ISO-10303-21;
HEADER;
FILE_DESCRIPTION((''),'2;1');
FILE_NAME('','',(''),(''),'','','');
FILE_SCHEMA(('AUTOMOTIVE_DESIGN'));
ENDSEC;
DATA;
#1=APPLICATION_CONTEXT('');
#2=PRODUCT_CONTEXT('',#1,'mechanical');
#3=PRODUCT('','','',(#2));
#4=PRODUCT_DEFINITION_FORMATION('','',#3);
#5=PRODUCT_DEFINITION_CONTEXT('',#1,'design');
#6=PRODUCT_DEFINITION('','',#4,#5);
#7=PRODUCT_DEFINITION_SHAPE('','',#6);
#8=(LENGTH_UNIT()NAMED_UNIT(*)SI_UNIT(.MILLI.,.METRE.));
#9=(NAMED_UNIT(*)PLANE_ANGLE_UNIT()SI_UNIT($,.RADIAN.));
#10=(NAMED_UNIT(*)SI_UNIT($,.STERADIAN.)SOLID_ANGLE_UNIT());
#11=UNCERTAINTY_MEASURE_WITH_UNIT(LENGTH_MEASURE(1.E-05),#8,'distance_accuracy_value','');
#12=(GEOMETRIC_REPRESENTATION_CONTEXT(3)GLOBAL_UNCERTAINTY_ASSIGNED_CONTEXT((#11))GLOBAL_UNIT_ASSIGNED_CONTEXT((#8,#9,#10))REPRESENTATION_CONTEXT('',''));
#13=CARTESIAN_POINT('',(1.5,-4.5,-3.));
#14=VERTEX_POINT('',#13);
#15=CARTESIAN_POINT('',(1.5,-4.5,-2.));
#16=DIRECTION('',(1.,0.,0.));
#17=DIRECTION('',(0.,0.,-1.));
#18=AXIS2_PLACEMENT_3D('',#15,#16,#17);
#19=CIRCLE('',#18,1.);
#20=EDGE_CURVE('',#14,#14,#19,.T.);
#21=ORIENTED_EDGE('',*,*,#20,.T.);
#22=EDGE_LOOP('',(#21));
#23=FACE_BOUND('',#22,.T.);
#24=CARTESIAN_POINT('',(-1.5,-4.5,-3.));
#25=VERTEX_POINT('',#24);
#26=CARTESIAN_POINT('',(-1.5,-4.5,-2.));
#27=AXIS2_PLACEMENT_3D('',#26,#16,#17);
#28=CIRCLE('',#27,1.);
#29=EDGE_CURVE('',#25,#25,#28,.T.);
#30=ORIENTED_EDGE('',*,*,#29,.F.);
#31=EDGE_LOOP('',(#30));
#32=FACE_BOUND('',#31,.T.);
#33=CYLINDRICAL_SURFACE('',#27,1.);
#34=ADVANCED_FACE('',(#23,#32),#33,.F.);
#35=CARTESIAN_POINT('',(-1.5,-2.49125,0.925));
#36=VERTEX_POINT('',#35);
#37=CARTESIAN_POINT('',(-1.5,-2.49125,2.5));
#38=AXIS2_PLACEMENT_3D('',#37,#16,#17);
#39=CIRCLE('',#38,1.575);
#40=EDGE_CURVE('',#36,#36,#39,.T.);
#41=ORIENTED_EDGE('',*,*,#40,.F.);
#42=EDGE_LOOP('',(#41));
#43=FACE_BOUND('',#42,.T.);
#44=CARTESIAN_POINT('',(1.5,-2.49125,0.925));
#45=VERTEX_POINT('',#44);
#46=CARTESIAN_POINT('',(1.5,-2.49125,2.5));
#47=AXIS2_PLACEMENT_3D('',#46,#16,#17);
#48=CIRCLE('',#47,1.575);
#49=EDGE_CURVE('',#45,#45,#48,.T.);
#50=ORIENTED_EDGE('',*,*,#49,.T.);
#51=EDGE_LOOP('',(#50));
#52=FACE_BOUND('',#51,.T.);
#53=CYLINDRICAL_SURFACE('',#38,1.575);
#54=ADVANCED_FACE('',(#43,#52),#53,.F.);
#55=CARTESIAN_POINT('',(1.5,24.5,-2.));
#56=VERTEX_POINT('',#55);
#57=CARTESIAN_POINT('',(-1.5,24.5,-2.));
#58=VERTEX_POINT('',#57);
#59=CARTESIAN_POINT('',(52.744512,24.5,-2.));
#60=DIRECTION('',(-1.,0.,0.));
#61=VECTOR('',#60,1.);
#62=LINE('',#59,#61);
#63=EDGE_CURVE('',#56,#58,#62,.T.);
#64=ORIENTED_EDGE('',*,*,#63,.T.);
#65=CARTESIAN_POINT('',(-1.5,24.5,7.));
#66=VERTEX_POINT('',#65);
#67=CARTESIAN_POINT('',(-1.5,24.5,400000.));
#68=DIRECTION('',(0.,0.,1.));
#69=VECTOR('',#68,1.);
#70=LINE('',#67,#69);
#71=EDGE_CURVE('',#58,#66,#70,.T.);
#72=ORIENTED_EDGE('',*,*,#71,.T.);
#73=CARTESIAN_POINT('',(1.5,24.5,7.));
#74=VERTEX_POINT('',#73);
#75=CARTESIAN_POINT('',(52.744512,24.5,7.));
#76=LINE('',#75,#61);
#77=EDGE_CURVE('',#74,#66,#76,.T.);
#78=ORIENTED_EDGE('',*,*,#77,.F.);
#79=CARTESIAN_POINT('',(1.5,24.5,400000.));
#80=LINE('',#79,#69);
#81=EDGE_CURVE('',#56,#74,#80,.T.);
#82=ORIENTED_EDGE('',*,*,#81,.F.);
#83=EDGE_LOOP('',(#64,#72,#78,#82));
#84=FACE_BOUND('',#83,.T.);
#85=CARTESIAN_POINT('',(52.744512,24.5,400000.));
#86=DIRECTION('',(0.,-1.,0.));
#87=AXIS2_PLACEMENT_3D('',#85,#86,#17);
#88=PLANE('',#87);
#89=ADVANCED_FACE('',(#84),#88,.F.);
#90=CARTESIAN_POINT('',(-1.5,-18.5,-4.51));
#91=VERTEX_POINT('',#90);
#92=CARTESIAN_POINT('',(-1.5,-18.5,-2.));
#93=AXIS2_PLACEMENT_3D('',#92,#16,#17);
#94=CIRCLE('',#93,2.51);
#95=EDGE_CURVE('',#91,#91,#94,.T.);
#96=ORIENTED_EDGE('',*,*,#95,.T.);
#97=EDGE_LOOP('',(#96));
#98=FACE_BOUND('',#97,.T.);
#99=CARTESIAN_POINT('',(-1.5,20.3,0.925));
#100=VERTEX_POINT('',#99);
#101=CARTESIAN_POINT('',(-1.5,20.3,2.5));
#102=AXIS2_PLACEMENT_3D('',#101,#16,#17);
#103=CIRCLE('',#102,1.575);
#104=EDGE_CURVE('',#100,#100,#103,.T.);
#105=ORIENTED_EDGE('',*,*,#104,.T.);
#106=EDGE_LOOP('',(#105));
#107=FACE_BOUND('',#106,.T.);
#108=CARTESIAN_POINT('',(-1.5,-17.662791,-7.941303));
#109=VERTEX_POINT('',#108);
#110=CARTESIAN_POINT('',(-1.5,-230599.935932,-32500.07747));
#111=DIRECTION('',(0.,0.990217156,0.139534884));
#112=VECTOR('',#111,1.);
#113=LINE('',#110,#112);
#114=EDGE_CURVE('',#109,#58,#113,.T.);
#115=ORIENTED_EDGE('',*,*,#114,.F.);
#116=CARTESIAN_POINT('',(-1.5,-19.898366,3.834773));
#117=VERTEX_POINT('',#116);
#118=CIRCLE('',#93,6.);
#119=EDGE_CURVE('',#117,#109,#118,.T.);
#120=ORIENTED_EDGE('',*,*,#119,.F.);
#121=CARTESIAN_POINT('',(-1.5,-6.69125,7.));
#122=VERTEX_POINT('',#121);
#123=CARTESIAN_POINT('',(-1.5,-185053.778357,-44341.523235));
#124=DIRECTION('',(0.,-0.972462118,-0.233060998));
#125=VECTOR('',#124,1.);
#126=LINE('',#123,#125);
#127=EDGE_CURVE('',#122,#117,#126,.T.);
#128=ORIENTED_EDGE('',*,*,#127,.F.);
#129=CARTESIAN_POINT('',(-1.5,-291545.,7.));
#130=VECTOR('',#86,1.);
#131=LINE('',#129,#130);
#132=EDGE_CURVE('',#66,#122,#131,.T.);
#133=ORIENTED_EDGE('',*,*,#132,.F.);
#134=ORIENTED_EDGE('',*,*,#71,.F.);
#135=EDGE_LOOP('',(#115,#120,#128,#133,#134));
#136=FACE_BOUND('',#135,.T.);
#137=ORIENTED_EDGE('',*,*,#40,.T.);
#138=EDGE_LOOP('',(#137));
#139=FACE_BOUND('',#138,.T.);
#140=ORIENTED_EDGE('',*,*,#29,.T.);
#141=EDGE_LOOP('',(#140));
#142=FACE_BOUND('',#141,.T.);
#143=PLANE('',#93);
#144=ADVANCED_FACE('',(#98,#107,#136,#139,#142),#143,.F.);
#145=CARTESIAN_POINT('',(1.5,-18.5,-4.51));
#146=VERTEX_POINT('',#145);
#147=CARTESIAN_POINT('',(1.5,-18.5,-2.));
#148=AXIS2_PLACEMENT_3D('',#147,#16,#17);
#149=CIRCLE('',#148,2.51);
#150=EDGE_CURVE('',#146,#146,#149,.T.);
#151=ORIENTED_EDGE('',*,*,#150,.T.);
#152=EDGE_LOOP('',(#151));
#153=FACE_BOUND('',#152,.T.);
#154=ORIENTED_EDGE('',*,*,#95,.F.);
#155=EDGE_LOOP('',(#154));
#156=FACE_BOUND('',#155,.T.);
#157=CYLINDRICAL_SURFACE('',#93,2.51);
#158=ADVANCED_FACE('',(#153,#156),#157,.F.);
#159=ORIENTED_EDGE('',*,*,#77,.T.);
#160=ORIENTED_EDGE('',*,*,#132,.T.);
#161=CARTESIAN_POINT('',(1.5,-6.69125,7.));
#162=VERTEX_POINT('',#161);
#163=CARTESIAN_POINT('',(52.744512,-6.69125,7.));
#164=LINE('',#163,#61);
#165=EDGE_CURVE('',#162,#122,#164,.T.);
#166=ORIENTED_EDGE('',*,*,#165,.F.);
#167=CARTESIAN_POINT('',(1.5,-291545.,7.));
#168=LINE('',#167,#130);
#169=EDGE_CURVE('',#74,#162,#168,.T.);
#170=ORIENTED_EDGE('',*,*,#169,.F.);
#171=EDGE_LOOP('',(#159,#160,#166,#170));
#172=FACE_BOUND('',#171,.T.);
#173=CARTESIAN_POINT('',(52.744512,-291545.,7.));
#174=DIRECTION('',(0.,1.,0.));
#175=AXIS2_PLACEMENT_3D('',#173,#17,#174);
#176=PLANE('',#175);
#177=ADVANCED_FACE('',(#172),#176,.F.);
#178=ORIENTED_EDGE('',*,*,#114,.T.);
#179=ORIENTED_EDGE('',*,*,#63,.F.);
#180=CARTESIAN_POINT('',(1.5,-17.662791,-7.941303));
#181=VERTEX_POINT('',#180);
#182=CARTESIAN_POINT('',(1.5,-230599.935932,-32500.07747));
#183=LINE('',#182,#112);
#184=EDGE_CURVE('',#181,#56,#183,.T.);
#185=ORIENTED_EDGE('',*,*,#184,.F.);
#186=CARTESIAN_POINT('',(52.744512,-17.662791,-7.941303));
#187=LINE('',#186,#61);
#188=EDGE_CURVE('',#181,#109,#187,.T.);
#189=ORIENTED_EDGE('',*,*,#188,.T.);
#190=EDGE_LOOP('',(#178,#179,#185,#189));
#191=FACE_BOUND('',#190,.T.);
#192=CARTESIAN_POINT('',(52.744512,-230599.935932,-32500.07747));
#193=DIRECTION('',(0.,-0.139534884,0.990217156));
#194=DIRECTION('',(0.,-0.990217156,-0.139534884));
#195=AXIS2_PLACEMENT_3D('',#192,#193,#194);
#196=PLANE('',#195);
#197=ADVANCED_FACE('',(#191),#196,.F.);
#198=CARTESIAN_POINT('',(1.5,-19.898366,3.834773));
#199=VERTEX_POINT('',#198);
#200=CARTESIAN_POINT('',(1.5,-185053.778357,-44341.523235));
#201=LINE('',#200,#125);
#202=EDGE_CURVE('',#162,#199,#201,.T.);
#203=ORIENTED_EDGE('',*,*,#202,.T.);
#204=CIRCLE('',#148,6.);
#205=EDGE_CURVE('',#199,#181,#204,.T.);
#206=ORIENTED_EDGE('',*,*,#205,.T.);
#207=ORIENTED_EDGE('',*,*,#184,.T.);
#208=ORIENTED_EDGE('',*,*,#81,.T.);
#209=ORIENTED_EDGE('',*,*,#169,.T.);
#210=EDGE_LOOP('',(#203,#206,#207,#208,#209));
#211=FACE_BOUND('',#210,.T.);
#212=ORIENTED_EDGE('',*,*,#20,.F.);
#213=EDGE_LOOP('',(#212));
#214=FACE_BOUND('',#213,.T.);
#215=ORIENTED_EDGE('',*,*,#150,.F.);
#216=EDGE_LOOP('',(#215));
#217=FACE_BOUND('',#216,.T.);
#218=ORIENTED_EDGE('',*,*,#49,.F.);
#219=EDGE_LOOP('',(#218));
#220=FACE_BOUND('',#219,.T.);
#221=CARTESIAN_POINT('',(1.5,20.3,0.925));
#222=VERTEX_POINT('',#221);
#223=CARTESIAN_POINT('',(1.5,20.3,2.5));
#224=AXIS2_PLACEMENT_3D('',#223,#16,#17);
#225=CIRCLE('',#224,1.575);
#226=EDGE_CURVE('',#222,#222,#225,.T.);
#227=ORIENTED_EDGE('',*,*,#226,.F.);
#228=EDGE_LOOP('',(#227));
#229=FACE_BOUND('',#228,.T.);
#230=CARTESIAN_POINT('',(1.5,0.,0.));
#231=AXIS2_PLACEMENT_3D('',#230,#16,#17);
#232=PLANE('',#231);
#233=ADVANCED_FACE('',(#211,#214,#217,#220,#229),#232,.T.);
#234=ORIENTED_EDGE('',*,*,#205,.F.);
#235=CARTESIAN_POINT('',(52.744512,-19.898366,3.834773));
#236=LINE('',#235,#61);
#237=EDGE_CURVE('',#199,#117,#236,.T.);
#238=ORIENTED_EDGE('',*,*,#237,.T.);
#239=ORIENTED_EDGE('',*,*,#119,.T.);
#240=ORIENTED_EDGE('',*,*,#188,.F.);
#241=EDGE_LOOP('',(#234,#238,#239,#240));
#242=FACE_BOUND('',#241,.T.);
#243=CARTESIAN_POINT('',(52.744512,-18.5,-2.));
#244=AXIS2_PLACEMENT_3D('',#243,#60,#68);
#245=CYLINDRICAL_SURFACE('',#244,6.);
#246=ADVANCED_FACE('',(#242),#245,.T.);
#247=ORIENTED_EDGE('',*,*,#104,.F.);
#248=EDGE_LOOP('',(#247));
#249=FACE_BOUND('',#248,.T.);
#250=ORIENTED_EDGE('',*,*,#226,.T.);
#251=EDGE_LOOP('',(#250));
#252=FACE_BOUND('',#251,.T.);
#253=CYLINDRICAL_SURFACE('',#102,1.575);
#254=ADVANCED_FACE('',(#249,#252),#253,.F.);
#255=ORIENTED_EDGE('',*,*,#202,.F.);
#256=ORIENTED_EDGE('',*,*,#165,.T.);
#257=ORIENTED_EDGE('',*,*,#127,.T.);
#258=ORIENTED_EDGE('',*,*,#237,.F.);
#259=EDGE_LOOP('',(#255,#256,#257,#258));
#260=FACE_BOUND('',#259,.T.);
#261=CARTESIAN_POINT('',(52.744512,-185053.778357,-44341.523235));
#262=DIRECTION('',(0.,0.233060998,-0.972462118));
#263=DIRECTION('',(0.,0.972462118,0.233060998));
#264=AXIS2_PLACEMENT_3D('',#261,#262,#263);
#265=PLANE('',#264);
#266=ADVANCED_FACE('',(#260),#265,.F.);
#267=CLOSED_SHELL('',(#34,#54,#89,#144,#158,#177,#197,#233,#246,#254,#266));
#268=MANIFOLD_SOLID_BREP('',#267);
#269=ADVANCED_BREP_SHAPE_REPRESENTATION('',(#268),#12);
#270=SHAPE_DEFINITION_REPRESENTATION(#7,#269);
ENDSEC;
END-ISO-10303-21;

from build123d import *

# Parameters (mm, degrees)
BOSS_EXTRUDE1_START                        = -1.5
BOSS_EXTRUDE1_DEPTH                        = 3
PIVOTSHAFTHOLE_CUT_DEPTH                   = 26.816661287
PIVOTSHAFTHOLE_CUT_DEPTH_BACK              = 26.816661287
PIVOTSHAFTHOLE_SKETCH_R                    = 2.51
MOUNTHOLESTOENDBLOCKSEEDFODDER_START       = -1.5
MOUNTHOLESTOENDBLOCKSEEDFODDER_OUTLINE_R   = 2.51
MOUNTHOLESTOENDBLOCKSEEDFODDER_DEPTH       = 3
MOUNTHOLESTOENDBLOCKSEED_SKETCH_R          = 1.575
MOUNTHOLESTOENDBLOCKSEED_CUT_DEPTH         = 26.816661287
MOUNTHOLESTOENDBLOCKSEED_PATTERN_START     = -1.5
MOUNTHOLESTOENDBLOCKSEED_PATTERN_OUTLINE_R = 1.575
MOUNTHOLESTOENDBLOCKSEED_PATTERN_DEPTH     = 3
SPRINGANCHORHOLE_CUT_DEPTH                 = 26.816661287
SPRINGANCHORHOLE_CUT_DEPTH_BACK            = 26.816661287
SPRINGANCHORHOLE_SKETCH_R                  = 1


# Read off the part's stored shape, not the designer's step: mountHolesToEndBlockSeedFodder, mountHolesToEndBlockSeed_pattern
with BuildPart() as part:
    # Sketch1 → Boss-Extrude1 (new body)
    with BuildSketch(Plane(origin=(0, 0, 0), x_dir=(0, 0, -1), z_dir=(1, 0, 0)).offset(BOSS_EXTRUDE1_START)):
        with BuildLine():
            Line((2, 24.5), (7.941302937, -17.662790698))
            ThreePointArc((7.941302937, -17.662790698), (3.119056028, -24.394719129), (-3.834772709, -19.898365989))
            Line((-3.834772709, -19.898365989), (-7, -6.69125))
            Line((-7, -6.69125), (-7, 24.5))
            Line((-7, 24.5), (2, 24.5))
        make_face()
    extrude(amount=BOSS_EXTRUDE1_DEPTH)

    # pivotShaftHole_sketch → pivotShaftHole_cut (cut, two sides: drawn at the far end of the back side and taken through both)
    with BuildSketch(Plane(origin=(0, 0, 0), x_dir=(0, 0, -1), z_dir=(1, 0, 0)).offset(-PIVOTSHAFTHOLE_CUT_DEPTH_BACK)):
        with Locations((2, -18.5)):
            Circle(PIVOTSHAFTHOLE_SKETCH_R)
    extrude(amount=PIVOTSHAFTHOLE_CUT_DEPTH + PIVOTSHAFTHOLE_CUT_DEPTH_BACK, mode=Mode.SUBTRACT)

    # mountHolesToEndBlockSeed_pattern outline → mountHolesToEndBlockSeed_pattern (cut)
    with BuildSketch(Plane.YZ.offset(MOUNTHOLESTOENDBLOCKSEED_PATTERN_START)):
        with Locations((-2.49125, 2.5)):
            Circle(MOUNTHOLESTOENDBLOCKSEED_PATTERN_OUTLINE_R)
        with Locations((20.3, 2.5)):
            Circle(MOUNTHOLESTOENDBLOCKSEED_PATTERN_OUTLINE_R)
    extrude(amount=MOUNTHOLESTOENDBLOCKSEED_PATTERN_DEPTH, mode=Mode.SUBTRACT)

    # springAnchorHole_sketch → springAnchorHole_cut (cut, two sides: drawn at the far end of the back side and taken through both)
    with BuildSketch(Plane(origin=(0, 0, 0), x_dir=(0, 0, -1), z_dir=(1, 0, 0)).offset(-SPRINGANCHORHOLE_CUT_DEPTH_BACK)):
        with Locations((2, -4.5)):
            Circle(SPRINGANCHORHOLE_SKETCH_R)
    extrude(amount=SPRINGANCHORHOLE_CUT_DEPTH + SPRINGANCHORHOLE_CUT_DEPTH_BACK, mode=Mode.SUBTRACT)


with BuildPart() as body_2:
    # mountHolesToEndBlockSeedFodder outline → mountHolesToEndBlockSeedFodder (new body)
    with BuildSketch(Plane.YZ.offset(MOUNTHOLESTOENDBLOCKSEEDFODDER_START)):
        with BuildLine():
            Line((24.5, 7), (-6.69125, 7))
            Line((-6.69125, 7), (-19.898365989, 3.834772709))
            ThreePointArc((-19.898365989, 3.834772709), (-24.394719129, -3.119056028), (-17.662790698, -7.941302937))
            Line((-17.662790698, -7.941302937), (24.5, -2))
            Line((24.5, -2), (24.5, 7))
        make_face()
        with Locations((-18.5, -2)):
            Circle(MOUNTHOLESTOENDBLOCKSEEDFODDER_OUTLINE_R, mode=Mode.SUBTRACT)
    extrude(amount=MOUNTHOLESTOENDBLOCKSEEDFODDER_DEPTH)

    # mountHolesToEndBlockSeed_sketch → mountHolesToEndBlockSeed_cut (cut, symmetric)
    with BuildSketch(Plane(origin=(0, 0, 0), x_dir=(0, 0, -1), z_dir=(1, 0, 0))):
        Circle(MOUNTHOLESTOENDBLOCKSEED_SKETCH_R)
    extrude(amount=MOUNTHOLESTOENDBLOCKSEED_CUT_DEPTH, both=True, mode=Mode.SUBTRACT)


solid = part.part
